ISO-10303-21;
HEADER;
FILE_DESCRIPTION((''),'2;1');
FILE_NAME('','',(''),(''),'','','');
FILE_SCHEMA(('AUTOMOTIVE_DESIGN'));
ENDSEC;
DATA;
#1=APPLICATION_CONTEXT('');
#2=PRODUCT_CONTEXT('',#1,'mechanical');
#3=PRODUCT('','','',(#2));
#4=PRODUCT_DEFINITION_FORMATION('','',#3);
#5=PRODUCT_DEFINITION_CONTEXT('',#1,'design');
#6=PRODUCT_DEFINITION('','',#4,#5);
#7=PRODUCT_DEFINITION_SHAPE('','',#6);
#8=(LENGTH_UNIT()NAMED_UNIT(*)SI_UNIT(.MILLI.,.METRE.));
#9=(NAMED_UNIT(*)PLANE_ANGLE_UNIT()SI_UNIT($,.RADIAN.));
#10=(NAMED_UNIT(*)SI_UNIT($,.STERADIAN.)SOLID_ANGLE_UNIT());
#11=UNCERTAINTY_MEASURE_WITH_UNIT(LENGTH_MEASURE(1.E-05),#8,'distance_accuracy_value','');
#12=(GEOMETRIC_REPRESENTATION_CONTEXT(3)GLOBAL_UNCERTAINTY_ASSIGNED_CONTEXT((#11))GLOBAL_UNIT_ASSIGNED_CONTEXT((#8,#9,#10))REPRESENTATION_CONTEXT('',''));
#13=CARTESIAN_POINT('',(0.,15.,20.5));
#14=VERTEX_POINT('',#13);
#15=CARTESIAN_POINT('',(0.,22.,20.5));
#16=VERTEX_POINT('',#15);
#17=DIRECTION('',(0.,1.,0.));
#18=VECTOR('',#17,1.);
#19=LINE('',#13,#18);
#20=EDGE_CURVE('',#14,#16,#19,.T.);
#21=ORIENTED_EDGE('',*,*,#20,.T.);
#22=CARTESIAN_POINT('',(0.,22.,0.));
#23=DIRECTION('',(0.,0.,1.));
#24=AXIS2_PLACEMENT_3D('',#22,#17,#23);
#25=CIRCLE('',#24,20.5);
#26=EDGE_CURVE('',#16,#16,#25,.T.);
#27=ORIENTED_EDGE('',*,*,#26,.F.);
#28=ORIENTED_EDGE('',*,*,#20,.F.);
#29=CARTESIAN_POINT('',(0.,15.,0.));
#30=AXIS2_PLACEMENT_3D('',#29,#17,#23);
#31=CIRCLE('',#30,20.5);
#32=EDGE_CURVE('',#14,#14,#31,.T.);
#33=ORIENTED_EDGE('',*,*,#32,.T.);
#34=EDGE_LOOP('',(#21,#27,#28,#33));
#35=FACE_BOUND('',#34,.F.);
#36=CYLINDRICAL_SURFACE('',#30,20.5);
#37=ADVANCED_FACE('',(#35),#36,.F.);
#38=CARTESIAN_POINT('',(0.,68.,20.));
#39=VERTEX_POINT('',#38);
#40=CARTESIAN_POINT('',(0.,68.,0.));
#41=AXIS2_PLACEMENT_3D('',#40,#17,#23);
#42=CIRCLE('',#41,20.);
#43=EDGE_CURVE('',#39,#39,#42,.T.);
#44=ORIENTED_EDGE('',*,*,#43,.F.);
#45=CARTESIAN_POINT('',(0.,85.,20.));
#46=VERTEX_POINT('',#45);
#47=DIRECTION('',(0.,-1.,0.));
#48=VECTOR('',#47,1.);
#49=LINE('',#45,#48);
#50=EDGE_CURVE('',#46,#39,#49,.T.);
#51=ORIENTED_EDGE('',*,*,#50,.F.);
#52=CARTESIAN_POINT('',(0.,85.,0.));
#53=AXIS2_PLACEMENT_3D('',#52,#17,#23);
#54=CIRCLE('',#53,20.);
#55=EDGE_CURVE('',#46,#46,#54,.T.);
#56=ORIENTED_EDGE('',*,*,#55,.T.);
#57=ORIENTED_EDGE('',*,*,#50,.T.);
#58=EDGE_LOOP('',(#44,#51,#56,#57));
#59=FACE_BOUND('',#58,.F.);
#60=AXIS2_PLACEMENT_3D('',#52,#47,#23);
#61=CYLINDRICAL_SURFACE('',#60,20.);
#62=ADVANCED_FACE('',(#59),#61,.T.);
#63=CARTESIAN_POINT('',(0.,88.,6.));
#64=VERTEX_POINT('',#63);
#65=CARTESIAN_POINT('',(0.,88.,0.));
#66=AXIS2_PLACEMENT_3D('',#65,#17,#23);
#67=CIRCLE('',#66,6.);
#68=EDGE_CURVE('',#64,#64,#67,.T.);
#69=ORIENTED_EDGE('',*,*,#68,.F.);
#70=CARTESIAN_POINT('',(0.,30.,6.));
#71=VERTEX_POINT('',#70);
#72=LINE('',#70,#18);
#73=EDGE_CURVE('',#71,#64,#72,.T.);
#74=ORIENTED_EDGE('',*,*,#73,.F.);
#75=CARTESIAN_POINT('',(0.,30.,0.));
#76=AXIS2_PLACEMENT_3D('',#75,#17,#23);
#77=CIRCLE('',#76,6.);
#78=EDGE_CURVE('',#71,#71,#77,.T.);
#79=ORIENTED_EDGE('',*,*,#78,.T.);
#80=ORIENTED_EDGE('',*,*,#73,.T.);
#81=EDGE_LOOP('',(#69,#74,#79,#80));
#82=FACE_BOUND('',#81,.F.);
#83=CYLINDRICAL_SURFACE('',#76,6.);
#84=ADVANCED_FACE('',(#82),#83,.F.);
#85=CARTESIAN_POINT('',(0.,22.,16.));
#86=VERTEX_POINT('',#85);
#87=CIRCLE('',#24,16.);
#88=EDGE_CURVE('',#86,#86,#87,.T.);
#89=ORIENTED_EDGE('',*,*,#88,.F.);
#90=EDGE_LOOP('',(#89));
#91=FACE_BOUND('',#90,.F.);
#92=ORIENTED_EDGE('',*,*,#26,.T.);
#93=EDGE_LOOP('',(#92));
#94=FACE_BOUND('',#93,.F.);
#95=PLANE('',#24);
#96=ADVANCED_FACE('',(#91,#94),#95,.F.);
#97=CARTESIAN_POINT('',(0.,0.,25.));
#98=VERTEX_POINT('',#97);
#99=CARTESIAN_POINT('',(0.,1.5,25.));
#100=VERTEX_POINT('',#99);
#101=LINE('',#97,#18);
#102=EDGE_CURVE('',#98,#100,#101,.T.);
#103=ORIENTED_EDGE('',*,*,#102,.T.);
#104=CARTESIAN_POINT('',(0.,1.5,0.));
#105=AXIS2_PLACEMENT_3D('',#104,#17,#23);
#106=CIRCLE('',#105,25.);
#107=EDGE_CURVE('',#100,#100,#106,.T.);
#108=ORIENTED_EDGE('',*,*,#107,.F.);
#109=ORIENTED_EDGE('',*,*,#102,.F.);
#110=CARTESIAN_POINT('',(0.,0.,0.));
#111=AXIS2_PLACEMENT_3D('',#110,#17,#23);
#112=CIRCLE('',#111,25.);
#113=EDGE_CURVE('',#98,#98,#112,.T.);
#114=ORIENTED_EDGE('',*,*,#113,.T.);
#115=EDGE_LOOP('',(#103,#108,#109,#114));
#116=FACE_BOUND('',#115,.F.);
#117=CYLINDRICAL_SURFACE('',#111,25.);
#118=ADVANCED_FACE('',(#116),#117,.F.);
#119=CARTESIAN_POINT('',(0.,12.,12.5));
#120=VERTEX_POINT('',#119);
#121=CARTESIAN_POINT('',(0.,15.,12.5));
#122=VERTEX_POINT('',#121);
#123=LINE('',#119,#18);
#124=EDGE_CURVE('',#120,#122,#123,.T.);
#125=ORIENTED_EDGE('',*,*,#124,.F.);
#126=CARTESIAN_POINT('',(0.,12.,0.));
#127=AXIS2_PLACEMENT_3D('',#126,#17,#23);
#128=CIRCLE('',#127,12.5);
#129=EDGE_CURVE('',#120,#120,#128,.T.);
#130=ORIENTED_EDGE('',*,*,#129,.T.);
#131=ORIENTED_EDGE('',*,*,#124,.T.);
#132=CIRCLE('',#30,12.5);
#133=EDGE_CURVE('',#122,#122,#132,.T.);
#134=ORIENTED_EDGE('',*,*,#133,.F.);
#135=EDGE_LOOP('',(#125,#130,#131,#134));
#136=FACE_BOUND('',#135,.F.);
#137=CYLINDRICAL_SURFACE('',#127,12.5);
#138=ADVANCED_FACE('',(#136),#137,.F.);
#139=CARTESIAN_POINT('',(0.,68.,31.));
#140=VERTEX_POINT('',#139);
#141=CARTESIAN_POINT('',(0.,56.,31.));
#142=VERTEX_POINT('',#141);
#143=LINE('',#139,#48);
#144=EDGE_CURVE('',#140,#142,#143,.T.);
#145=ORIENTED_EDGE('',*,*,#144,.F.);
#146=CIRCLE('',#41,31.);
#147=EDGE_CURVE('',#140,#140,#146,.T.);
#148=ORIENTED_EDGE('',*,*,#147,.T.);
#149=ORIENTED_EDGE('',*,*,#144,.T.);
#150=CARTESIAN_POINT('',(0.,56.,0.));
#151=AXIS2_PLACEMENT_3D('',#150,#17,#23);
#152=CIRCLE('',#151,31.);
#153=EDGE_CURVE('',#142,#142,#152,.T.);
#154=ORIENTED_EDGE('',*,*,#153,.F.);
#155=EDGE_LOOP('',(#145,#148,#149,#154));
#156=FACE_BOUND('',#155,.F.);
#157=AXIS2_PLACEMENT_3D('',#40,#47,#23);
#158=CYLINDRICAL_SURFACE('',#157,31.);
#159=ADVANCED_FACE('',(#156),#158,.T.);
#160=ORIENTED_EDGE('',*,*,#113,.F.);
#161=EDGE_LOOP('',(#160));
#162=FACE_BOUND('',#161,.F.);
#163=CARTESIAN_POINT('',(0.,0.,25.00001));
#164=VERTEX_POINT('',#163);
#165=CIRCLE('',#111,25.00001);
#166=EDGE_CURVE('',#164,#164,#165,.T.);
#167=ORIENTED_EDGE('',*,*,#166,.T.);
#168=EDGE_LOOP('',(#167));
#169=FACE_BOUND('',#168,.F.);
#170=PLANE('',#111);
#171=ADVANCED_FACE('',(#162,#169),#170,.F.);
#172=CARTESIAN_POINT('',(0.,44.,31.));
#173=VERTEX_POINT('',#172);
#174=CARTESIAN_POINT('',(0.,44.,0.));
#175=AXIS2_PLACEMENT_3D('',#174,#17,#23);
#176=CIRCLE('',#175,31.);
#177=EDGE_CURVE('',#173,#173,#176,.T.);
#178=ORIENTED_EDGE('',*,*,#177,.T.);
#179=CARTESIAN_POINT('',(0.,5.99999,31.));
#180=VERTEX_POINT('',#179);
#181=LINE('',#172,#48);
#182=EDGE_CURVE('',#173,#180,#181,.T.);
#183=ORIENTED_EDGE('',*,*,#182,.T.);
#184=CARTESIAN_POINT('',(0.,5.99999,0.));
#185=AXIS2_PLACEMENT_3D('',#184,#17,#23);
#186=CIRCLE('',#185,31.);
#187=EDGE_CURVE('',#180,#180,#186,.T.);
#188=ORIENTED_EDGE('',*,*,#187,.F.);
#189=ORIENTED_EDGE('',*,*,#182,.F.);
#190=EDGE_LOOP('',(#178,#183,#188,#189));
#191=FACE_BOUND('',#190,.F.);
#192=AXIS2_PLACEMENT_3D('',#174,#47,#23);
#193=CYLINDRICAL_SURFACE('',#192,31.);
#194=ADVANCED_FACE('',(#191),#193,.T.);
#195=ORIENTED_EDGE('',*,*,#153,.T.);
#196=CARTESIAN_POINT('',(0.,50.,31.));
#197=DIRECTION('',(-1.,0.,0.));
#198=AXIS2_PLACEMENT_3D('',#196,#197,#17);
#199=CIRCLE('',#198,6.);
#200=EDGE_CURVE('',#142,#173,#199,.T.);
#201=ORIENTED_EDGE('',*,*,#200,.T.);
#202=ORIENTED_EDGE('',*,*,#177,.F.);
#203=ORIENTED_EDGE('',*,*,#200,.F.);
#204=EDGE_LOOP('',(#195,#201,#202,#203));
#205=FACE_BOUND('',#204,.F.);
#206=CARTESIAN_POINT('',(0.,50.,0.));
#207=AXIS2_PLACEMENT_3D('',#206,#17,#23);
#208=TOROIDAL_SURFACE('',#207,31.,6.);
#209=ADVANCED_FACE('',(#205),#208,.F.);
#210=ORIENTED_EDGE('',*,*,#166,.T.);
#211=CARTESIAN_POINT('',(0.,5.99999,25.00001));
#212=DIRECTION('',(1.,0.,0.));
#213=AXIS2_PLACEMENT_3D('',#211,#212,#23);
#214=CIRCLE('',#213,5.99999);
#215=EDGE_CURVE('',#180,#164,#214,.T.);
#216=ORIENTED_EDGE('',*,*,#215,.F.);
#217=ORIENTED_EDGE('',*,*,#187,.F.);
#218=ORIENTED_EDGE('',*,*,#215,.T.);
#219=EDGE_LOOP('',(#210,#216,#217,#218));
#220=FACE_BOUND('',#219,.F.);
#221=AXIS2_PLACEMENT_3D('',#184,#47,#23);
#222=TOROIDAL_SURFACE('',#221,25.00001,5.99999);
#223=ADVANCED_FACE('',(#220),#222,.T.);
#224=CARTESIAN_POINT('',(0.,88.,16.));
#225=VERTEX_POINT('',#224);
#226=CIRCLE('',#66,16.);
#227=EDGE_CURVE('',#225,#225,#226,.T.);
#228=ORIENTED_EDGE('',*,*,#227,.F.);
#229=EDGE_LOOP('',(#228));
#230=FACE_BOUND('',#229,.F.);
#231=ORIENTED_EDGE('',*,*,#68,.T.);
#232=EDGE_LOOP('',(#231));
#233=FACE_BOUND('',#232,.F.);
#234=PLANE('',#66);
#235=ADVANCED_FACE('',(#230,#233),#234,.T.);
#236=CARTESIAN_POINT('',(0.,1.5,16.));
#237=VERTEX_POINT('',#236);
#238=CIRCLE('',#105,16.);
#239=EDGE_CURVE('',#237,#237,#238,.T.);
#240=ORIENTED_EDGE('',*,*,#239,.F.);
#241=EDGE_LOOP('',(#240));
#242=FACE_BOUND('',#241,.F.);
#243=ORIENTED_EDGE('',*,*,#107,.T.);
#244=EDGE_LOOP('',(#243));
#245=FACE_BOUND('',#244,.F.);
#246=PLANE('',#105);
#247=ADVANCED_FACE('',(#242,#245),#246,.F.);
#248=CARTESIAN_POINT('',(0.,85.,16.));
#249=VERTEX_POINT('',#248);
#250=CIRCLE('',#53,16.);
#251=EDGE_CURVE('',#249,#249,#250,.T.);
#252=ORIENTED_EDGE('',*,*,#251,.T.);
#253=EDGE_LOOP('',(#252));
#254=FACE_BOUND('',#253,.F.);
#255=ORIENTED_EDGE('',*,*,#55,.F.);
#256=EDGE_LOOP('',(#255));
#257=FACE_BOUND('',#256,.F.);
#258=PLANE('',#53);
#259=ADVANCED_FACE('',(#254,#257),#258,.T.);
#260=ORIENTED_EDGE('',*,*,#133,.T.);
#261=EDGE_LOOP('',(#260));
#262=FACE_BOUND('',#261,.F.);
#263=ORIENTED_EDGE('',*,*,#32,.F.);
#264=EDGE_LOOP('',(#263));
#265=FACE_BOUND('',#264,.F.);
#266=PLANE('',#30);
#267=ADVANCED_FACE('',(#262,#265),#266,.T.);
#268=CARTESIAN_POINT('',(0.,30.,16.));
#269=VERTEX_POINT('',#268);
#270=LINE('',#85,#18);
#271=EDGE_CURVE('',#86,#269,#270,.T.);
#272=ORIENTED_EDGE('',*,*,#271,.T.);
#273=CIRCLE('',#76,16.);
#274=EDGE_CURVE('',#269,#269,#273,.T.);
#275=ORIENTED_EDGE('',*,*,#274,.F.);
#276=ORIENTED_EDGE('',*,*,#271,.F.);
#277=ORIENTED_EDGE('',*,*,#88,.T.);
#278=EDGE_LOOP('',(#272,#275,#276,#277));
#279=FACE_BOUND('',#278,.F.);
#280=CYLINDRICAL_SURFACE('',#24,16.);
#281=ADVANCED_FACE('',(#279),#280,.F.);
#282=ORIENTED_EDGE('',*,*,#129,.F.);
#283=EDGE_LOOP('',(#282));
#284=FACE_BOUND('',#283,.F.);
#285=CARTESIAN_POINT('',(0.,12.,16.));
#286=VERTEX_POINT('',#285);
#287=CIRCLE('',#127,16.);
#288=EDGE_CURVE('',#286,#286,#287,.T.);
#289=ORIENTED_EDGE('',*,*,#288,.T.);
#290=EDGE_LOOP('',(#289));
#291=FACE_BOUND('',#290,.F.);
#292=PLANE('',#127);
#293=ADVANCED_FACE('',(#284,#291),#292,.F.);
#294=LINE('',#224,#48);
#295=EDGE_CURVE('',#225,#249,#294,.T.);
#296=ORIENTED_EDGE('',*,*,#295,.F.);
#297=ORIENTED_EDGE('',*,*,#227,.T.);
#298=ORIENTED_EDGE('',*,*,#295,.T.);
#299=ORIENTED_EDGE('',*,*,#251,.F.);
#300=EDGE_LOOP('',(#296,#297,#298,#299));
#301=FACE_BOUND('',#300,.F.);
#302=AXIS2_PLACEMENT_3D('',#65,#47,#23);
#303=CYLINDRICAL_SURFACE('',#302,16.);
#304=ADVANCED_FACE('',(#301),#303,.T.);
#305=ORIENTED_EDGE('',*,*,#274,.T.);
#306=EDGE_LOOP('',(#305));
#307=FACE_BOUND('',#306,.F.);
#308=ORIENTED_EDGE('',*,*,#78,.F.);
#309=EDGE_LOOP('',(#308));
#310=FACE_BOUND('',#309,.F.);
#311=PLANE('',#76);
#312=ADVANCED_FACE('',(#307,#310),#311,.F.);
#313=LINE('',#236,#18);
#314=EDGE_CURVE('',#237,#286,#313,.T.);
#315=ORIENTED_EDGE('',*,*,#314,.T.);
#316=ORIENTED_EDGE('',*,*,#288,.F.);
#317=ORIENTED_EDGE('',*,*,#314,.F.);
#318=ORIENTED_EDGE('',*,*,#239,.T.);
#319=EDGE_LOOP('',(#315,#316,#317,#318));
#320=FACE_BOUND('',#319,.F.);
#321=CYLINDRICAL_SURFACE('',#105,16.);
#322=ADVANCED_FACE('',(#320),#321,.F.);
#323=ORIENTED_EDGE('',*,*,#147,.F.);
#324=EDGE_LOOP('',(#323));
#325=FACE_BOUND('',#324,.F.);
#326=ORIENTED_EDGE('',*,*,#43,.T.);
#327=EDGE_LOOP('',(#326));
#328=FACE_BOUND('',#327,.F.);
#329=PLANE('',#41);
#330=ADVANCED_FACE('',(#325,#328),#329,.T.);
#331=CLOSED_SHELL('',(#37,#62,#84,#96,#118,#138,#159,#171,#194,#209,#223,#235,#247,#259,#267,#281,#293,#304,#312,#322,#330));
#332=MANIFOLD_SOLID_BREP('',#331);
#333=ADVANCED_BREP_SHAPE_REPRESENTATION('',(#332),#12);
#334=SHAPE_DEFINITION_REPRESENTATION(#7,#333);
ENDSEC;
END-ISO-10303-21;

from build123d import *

# Parameters (mm, degrees)
F2_R = 5.99999


# Not quite as in the source:
# - a fillet or chamfer is up to 0.001 mm smaller than in the source, because OpenCascade refuses the exact size


with BuildPart() as f1:
    # F0 (on Right) → F1 (revolve)
    with BuildSketch(Plane.YZ):
        with BuildLine():
            Line((30, 6), (88, 6))
            Line((88, 6), (88, 16))
            Line((88, 16), (85, 16))
            Line((85, 16), (85, 20))
            Line((85, 20), (68, 20))
            Line((68, 20), (68, 31))
            Line((68, 31), (56, 31))
            ThreePointArc((56, 31), (50, 25), (44, 31))
            Line((44, 31), (0, 31))
            Line((0, 31), (0, 25))
            Line((0, 25), (1.5, 25))
            Line((1.5, 25), (1.5, 16))
            Line((1.5, 16), (12, 16))
            Line((12, 16), (12, 12.5))
            Line((12, 12.5), (15, 12.5))
            Line((15, 12.5), (15, 20.5))
            Line((15, 20.5), (22, 20.5))
            Line((22, 20.5), (22, 16))
            Line((22, 16), (30, 16))
            Line((30, 16), (30, 6))
        make_face()
    revolve(axis=Axis((0, 43.1545964642, 0), (0, 1, 0)))

    # F2 (radius 6 in the source; OpenCascade refuses exactly that, so slightly less here)
    f2_edges = [f1.edges().sort_by_distance(p)[0] for p in [
        (0, 0, -31),
    ]]
    fillet(f2_edges, radius=F2_R)


solid = f1.part
